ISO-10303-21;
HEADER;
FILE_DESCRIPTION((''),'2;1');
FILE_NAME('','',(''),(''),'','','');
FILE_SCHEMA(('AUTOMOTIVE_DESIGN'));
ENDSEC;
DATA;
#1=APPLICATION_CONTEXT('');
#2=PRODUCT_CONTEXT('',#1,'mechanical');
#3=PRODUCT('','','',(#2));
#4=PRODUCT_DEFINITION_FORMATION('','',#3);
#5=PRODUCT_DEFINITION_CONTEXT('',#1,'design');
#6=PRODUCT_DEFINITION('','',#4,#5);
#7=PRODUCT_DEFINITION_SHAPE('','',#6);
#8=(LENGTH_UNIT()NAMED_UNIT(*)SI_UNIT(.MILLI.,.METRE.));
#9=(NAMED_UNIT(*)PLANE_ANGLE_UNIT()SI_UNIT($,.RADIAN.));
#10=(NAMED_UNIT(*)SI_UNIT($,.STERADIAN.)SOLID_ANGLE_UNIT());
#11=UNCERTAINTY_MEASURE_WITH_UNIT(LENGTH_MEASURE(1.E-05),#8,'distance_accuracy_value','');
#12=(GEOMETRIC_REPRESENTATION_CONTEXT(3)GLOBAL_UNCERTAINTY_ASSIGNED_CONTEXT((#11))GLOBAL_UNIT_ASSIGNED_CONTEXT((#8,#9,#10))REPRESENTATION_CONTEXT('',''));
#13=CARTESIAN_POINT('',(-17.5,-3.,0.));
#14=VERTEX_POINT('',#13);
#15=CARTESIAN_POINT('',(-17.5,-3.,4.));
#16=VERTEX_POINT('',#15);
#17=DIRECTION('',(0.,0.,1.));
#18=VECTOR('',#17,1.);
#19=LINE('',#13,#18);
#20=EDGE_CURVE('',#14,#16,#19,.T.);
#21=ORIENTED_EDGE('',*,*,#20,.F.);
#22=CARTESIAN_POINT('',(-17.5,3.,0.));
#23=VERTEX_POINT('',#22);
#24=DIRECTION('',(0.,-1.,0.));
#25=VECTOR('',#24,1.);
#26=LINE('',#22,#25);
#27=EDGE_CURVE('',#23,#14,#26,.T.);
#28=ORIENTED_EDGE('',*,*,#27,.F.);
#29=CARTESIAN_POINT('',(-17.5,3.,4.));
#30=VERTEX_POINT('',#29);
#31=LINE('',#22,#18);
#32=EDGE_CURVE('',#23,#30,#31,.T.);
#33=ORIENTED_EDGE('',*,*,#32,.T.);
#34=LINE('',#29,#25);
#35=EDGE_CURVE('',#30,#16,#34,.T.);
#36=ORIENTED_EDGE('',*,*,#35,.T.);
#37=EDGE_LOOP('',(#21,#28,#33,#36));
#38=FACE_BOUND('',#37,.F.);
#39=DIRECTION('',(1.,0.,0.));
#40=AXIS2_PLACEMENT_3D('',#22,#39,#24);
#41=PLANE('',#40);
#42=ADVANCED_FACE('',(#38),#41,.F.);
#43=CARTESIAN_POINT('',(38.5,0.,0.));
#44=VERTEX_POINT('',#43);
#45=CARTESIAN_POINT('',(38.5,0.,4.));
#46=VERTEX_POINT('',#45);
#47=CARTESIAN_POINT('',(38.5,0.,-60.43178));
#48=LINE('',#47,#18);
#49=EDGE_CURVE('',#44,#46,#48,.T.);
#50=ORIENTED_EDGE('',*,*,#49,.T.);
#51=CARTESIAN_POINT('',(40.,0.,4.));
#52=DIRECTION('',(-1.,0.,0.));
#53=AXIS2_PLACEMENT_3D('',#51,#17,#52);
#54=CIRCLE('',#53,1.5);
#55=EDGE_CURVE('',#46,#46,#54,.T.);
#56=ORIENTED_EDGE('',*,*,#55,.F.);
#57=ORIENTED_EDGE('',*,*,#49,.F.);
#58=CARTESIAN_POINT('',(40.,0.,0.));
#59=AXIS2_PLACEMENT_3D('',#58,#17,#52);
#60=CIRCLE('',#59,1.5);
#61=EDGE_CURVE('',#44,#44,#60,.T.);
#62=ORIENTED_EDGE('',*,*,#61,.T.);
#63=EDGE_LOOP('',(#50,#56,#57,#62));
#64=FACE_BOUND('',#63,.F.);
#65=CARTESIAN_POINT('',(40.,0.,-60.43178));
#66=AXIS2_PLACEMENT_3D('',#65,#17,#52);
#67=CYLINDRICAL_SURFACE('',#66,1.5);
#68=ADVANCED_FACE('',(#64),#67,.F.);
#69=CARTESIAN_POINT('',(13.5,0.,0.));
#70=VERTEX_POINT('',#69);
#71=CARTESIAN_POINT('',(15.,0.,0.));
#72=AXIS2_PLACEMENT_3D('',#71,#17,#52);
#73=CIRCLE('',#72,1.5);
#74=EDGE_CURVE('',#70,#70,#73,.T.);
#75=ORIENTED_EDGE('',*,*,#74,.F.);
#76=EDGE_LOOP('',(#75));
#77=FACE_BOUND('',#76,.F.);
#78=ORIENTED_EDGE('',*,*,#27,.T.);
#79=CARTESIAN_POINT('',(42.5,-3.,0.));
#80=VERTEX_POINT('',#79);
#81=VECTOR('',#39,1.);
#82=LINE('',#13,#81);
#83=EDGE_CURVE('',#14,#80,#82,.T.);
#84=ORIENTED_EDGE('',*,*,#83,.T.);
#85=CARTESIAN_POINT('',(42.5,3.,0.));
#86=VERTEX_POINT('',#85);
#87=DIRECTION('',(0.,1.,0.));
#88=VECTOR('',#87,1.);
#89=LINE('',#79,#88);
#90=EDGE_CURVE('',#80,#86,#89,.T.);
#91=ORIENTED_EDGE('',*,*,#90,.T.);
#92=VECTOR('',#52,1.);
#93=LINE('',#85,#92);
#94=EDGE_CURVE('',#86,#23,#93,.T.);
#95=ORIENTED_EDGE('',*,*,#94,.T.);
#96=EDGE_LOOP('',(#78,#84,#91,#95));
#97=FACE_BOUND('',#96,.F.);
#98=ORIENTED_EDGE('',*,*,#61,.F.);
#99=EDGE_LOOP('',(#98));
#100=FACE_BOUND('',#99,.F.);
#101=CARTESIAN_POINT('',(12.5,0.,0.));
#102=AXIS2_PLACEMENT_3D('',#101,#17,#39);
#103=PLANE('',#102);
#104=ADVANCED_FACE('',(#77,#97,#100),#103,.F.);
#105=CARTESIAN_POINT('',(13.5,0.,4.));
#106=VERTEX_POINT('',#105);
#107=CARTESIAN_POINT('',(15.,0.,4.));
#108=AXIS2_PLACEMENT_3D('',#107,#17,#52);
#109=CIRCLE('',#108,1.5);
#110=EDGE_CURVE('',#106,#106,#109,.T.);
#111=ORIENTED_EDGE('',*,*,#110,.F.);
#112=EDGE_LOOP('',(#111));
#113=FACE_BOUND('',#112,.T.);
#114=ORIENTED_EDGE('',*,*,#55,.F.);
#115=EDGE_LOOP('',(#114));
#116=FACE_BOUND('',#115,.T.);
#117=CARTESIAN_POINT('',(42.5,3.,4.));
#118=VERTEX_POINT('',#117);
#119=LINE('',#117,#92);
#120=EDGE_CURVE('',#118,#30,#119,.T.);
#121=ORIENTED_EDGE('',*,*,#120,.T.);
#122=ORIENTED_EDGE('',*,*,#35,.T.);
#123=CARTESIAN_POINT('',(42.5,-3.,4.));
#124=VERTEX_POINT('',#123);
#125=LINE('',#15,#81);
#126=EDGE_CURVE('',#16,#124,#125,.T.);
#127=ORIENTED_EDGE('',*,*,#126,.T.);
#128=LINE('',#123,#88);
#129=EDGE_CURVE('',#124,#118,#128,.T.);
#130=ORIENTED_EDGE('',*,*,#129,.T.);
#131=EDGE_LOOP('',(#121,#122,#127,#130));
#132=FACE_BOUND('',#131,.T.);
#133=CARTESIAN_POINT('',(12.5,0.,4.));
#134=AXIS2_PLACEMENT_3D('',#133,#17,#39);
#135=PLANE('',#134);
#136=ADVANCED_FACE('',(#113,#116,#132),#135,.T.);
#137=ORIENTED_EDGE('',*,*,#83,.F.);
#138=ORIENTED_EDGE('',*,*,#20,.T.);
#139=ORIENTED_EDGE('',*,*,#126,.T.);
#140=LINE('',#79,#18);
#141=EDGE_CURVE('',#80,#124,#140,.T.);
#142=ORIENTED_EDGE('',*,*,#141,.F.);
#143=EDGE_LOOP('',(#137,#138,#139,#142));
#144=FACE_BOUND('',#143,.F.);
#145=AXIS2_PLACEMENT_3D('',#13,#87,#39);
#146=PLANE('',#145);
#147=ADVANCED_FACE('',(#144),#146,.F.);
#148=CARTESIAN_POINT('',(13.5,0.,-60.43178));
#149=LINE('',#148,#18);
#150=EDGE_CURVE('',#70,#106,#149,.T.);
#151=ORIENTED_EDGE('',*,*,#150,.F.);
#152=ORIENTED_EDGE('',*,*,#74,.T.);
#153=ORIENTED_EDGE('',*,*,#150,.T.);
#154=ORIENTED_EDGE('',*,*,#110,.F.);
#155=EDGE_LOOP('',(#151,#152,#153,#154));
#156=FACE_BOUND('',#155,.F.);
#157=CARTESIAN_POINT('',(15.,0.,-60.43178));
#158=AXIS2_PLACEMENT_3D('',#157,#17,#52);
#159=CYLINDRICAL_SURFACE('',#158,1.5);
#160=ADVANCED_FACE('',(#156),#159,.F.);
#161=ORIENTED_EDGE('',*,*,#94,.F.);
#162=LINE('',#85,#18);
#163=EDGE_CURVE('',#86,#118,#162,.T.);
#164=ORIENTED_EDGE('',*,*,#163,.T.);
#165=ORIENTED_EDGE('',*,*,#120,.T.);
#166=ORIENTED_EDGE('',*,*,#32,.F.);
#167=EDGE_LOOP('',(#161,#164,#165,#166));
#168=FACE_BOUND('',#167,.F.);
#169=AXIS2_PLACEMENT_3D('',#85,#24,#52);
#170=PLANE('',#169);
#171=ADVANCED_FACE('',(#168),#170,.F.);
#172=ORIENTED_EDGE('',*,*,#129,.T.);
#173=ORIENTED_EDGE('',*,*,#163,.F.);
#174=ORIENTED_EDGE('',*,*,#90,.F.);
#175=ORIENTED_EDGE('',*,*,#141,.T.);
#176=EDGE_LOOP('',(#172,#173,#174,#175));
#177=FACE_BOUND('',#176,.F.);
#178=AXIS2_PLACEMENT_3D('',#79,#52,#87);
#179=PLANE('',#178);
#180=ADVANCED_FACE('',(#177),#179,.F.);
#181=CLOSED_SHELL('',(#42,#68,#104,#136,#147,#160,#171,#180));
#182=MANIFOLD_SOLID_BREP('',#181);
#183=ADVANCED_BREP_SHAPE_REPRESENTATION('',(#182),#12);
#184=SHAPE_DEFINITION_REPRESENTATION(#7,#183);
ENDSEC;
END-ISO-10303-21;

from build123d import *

# Parameters (mm, degrees)
F1_DEPTH = 4
F2_D     = 3


# Not quite as in the source:
# - a feature names something its author has since deleted; it is built from what else it names


with BuildPart() as f1:
    # F0 (on Top) → F1 (new body)
    with BuildSketch(Plane.XY):
        Polygon((-17.5, -3), (42.5, -3), (42.5, 0), (42.5, 3), (-17.5, 3), (-17.5, 0), align=None)
    extrude(amount=F1_DEPTH)

    # F2 (through all)
    with Locations(Plane(origin=(0, 0, 0), x_dir=(1, 0, 0), z_dir=(0, 0, -1))):
        with Locations((40, 0), (15, 0)):
            Hole(F2_D / 2)


solid = f1.part
